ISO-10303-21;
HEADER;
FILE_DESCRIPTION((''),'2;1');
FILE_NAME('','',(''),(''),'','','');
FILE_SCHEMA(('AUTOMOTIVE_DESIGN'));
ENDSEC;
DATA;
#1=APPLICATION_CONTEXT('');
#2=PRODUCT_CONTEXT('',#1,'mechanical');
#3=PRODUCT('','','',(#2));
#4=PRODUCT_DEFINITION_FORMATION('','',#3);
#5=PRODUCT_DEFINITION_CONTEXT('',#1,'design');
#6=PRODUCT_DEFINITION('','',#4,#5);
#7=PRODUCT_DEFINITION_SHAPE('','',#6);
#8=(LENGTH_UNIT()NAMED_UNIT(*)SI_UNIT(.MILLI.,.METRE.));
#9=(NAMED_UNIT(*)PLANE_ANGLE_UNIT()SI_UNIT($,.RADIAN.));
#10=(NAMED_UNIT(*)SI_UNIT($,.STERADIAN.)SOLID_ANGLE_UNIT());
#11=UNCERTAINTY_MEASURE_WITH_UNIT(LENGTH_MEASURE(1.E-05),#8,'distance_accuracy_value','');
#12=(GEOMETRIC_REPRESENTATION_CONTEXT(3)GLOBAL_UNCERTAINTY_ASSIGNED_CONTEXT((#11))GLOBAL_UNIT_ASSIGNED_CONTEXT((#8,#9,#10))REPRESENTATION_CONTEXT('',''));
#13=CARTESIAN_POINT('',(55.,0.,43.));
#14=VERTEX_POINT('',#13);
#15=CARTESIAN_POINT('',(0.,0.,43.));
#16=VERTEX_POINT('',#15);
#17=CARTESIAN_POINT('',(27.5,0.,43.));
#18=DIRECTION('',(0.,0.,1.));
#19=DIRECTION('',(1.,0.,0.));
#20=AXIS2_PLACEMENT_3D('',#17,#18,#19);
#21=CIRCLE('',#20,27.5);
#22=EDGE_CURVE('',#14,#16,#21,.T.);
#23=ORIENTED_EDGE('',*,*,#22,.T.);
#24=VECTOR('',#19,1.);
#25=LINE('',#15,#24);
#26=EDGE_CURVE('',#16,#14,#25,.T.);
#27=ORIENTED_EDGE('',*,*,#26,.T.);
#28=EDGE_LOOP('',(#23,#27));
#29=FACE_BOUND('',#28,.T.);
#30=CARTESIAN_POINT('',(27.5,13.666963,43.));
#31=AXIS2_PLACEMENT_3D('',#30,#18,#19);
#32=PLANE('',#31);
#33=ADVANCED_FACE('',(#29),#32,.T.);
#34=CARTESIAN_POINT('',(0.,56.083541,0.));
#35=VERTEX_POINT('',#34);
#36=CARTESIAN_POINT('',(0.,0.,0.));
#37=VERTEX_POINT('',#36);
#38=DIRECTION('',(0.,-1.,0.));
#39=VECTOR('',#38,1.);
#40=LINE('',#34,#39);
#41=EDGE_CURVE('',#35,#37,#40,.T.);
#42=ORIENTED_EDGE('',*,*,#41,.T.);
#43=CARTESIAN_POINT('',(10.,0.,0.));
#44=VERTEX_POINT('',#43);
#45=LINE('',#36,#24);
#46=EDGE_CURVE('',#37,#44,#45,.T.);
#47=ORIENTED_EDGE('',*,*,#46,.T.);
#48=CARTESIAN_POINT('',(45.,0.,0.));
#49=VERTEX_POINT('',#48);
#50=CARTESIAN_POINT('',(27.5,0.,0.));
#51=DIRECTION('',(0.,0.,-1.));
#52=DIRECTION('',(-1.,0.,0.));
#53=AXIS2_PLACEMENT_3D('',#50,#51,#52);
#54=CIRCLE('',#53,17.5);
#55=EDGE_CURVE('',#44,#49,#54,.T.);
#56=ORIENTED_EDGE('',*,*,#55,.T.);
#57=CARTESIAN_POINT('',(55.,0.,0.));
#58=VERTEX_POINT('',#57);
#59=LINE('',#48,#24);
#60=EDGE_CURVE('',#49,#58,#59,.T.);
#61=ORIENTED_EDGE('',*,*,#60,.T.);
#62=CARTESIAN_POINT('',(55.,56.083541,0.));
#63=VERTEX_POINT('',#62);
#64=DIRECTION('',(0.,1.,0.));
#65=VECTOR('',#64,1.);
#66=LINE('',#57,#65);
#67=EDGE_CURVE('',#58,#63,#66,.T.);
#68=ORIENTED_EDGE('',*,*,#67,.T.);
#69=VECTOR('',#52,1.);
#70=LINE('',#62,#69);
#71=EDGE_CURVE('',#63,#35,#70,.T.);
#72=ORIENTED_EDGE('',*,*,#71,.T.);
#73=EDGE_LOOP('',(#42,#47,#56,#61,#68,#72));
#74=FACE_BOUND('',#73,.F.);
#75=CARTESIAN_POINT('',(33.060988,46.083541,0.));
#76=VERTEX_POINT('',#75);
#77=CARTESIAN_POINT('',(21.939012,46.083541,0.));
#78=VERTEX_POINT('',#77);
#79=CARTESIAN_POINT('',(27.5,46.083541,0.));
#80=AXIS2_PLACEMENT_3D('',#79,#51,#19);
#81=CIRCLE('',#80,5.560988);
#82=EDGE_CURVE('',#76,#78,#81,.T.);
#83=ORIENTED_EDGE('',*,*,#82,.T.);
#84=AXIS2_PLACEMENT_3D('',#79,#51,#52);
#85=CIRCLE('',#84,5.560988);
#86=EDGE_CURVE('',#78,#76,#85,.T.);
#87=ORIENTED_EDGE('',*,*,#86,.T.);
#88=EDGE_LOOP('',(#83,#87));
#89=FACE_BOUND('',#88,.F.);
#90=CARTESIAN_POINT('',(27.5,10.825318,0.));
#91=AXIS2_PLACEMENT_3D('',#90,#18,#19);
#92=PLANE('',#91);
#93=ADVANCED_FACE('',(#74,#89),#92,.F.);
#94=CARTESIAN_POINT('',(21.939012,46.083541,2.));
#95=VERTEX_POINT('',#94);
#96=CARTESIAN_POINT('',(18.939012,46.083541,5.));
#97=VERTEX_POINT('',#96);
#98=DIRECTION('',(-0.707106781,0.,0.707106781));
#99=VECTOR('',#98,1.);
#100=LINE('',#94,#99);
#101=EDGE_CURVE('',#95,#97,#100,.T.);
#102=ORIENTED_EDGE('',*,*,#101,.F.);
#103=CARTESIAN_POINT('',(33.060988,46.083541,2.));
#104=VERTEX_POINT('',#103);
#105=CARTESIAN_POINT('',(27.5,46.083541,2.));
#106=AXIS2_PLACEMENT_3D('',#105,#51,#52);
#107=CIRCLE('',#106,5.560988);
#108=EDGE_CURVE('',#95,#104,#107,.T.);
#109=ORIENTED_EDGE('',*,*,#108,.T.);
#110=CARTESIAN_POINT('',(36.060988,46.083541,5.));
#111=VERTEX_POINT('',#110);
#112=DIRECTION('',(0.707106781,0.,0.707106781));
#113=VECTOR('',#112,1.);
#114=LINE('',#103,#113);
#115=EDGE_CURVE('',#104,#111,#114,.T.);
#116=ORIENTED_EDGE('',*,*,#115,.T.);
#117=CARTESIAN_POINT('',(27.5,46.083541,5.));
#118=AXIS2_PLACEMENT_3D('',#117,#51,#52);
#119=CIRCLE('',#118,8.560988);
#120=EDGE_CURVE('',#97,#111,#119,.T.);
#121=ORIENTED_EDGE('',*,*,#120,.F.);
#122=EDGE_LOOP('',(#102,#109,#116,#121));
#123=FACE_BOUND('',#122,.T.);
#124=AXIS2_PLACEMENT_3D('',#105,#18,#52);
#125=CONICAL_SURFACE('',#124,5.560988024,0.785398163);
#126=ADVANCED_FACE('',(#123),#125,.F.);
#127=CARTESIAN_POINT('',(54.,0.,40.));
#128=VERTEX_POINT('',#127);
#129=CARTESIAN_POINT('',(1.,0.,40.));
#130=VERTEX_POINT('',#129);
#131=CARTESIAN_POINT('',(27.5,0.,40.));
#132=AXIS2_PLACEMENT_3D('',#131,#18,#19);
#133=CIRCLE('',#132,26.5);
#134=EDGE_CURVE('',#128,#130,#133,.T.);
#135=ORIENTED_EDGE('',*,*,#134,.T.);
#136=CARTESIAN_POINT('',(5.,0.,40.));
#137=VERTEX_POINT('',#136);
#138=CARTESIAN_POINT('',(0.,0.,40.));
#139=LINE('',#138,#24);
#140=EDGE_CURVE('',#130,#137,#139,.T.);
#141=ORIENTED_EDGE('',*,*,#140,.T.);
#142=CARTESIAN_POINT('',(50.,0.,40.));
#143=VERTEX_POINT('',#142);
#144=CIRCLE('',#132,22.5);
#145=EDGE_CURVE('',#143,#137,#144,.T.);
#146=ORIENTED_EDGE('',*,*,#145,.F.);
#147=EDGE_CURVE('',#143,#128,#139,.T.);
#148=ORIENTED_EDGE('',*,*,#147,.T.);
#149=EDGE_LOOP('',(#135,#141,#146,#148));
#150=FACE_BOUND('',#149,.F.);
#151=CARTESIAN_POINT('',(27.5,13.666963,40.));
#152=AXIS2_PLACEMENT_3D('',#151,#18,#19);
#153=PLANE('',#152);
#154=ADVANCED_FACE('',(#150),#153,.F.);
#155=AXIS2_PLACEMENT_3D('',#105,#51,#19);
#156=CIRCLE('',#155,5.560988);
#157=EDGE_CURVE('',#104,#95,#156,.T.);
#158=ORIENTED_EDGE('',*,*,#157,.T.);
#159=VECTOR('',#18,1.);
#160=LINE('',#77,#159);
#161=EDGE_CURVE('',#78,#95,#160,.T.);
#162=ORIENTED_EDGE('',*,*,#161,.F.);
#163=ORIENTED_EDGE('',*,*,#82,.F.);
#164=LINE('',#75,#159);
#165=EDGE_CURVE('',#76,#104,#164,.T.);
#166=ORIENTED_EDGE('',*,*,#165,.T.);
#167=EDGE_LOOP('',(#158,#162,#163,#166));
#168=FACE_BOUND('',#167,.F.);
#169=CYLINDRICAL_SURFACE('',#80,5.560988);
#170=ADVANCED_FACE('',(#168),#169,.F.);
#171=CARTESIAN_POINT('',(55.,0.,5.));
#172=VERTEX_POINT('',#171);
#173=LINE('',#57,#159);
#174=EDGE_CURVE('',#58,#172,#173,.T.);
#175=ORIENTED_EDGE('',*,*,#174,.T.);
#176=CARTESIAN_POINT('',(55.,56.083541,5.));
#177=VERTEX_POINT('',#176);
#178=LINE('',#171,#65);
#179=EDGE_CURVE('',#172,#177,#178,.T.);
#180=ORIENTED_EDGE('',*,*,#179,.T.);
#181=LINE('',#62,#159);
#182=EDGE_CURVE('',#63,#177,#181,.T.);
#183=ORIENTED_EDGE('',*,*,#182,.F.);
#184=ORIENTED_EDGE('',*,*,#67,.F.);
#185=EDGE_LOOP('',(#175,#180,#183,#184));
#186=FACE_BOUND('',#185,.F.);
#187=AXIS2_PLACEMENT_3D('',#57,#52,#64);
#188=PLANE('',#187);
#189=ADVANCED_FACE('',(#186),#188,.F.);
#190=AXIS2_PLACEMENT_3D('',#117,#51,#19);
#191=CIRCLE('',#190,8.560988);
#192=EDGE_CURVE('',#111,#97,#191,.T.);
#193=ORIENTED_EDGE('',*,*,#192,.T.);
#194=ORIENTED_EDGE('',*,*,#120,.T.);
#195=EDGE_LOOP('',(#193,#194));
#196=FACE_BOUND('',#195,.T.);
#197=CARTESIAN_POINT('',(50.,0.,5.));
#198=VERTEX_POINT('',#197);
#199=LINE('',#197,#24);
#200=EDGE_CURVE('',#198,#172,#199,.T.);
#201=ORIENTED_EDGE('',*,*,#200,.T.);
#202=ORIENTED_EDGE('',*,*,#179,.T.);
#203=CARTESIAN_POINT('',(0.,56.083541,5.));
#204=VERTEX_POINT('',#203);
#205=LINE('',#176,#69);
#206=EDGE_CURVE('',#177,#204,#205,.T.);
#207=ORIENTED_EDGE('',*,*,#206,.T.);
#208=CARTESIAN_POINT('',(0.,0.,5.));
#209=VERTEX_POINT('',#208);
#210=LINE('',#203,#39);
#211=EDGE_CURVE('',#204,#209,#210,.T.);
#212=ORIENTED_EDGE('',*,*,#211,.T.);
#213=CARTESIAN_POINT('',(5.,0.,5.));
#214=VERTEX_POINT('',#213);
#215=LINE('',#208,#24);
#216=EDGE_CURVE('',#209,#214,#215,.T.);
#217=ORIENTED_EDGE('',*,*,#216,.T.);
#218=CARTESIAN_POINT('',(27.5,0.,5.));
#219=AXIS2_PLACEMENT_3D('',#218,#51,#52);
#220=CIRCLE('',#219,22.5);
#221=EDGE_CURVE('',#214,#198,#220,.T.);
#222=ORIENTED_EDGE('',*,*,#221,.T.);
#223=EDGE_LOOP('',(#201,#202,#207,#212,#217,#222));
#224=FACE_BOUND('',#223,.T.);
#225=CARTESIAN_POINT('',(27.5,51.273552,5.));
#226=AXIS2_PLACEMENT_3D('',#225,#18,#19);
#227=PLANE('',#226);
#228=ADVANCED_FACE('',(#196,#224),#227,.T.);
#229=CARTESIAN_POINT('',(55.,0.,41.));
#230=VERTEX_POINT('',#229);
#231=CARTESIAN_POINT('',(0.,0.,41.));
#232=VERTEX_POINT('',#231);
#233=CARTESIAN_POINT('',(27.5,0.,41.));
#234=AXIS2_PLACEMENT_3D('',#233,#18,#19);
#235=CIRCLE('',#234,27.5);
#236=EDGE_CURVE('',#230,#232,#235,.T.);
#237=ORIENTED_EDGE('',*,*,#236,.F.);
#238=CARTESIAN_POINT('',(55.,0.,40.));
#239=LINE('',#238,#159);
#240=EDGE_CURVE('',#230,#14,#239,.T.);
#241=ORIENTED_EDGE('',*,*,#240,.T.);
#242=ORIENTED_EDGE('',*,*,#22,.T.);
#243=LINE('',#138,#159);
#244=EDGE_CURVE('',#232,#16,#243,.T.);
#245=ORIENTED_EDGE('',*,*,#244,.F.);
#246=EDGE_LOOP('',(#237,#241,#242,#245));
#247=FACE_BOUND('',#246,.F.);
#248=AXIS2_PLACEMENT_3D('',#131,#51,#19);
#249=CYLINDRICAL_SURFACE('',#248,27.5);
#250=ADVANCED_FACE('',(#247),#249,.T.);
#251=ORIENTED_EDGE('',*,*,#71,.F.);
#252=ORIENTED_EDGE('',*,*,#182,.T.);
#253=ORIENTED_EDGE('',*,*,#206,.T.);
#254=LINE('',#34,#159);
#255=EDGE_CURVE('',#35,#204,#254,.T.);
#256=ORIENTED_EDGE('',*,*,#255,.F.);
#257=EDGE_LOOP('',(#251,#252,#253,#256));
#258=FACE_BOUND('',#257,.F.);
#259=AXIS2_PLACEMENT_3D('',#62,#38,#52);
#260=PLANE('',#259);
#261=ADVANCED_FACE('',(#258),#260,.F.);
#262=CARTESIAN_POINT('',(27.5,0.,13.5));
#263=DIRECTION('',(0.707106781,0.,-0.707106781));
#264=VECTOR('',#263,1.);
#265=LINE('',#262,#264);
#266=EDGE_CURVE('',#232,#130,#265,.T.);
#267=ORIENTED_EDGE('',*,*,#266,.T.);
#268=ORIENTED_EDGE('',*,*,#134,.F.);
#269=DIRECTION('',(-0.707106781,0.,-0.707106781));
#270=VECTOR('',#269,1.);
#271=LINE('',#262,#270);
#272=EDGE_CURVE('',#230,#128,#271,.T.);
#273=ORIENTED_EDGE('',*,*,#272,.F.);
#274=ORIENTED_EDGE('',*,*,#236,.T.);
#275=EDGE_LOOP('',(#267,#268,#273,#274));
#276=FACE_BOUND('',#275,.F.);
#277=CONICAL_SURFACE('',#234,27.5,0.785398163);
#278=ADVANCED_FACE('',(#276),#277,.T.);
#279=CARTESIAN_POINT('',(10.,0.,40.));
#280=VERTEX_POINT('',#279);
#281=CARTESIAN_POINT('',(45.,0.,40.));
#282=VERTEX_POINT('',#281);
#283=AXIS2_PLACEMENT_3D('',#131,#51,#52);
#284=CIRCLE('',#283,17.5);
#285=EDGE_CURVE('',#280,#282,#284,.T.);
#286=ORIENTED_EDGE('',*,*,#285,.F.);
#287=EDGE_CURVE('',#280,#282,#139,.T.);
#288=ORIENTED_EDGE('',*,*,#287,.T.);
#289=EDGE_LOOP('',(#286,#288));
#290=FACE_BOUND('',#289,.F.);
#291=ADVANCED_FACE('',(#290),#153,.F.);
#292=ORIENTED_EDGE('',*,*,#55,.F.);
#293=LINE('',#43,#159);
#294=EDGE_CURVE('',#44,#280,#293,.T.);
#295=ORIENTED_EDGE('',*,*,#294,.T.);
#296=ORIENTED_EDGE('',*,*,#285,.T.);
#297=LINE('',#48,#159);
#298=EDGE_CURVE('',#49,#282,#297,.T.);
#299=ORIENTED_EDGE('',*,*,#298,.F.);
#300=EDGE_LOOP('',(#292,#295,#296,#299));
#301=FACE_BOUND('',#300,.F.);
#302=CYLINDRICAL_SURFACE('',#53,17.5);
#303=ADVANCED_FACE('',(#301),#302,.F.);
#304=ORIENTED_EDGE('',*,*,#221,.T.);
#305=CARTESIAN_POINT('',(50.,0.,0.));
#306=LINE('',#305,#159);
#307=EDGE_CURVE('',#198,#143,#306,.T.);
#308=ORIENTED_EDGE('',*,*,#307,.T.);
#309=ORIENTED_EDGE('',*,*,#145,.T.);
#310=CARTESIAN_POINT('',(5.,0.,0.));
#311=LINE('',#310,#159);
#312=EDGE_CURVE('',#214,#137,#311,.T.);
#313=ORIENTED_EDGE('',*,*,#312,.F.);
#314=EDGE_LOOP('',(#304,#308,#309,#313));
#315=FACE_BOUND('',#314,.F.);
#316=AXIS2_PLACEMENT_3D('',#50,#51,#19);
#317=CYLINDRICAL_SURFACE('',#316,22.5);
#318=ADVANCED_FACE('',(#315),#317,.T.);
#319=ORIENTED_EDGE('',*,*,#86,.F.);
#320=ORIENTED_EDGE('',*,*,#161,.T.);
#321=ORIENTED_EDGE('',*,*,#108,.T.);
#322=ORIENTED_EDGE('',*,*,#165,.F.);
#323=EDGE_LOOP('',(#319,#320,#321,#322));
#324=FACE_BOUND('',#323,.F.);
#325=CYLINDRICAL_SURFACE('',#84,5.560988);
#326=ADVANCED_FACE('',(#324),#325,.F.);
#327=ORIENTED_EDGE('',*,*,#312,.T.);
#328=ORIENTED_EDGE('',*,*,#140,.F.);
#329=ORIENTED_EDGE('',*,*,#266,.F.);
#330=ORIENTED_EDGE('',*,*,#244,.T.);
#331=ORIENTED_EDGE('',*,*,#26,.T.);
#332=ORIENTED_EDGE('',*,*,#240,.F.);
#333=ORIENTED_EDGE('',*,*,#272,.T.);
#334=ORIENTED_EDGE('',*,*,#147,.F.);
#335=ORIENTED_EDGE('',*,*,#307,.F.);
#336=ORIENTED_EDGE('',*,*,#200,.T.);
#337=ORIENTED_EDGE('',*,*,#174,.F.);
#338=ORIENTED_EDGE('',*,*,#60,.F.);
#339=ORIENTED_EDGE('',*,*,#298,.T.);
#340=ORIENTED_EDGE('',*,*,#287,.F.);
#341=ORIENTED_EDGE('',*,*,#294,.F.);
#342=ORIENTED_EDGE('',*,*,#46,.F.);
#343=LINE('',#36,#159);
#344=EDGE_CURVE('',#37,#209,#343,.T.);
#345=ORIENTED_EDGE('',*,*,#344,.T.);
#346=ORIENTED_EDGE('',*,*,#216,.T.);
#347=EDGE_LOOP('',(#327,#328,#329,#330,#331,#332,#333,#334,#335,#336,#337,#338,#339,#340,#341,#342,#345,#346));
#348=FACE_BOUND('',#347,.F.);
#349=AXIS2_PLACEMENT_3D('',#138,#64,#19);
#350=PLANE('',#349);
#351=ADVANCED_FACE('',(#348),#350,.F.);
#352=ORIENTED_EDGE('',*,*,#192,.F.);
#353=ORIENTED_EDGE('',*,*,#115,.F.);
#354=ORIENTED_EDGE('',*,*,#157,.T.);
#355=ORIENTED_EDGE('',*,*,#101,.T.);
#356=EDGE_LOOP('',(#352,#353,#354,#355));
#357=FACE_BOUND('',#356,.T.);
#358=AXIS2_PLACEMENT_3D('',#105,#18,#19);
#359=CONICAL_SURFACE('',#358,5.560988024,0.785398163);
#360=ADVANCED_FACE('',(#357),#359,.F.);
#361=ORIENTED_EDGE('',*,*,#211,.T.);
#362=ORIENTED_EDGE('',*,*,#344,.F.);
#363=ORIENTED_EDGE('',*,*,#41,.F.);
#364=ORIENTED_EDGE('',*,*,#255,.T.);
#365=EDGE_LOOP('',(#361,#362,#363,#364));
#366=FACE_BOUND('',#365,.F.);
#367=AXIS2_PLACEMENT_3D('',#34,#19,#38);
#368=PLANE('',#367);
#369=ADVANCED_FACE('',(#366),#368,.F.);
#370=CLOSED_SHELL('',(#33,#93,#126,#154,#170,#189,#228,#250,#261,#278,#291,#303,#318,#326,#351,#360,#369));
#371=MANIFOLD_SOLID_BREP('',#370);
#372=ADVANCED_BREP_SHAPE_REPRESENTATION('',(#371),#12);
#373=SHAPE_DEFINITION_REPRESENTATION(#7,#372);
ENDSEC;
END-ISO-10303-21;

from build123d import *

# Parameters (mm, degrees)
F1_DEPTH = 5
F2_DEPTH = 40
F3_SIZE  = 3
F5_DEPTH = 3
F6_SIZE  = 1


with BuildPart() as f1:
    # F0 (on Top) → F1 (new body)
    with BuildSketch(Plane.XY):
        with BuildLine():
            Line((55, 56.0835413635), (0, 56.0835413635))
            Line((0, 56.0835413635), (0, 46.0835413635))
            Line((0, 46.0835413635), (21.9390119762, 46.0835413635))
            ThreePointArc((21.9390119762, 46.0835413635), (27.5, 51.6445293873), (33.0609880238, 46.0835413635))
            Line((33.0609880238, 46.0835413635), (55, 46.0835413635))
            Line((55, 46.0835413635), (55, 56.0835413635))
        make_face()
        with BuildLine():
            Line((21.9390119762, 46.0835413635), (0, 46.0835413635))
            Line((0, 46.0835413635), (0, 0))
            Line((0, 0), (5, 0))
            ThreePointArc((5, 0), (27.5, 22.5), (50, 0))
            Line((50, 0), (55, 0))
            Line((55, 0), (55, 46.0835413635))
            Line((55, 46.0835413635), (33.0609880238, 46.0835413635))
            ThreePointArc((33.0609880238, 46.0835413635), (27.5, 40.5225533396), (21.9390119762, 46.0835413635))
        make_face()
    extrude(amount=F1_DEPTH)

    # F0 (on Top) → F2 (join)
    with BuildSketch(Plane.XY):
        with BuildLine():
            ThreePointArc((50, 0), (27.5, 22.5), (5, 0))
            Line((5, 0), (10, 0))
            ThreePointArc((10, 0), (27.5, 17.5), (45, 0))
            Line((45, 0), (50, 0))
        make_face()
    extrude(amount=F2_DEPTH)

    # F3
    f3_edges = [f1.edges().sort_by_distance(p)[0] for p in [
        (21.939012, 46.083541, 5),
    ]]
    chamfer(f3_edges, length=F3_SIZE)

    # F4 (on face) → F5 (join)
    with BuildSketch(Plane.XY.offset(40)):
        with BuildLine():
            Line((50, 0), (55, 0))
            ThreePointArc((55, 0), (27.5, 27.5), (0, 0))
            Line((0, 0), (5, 0))
            ThreePointArc((5, 0), (27.5, 22.5), (50, 0))
        make_face()
        with BuildLine():
            Line((45, 0), (50, 0))
            ThreePointArc((50, 0), (27.5, 22.5), (5, 0))
            Line((5, 0), (10, 0))
            ThreePointArc((10, 0), (27.5, 17.5), (45, 0))
        make_face()
        with BuildLine():
            Line((10, 0), (45, 0))
            ThreePointArc((45, 0), (27.5, 17.5), (10, 0))
        make_face()
    extrude(amount=F5_DEPTH)

    # F6
    f6_edges = [f1.edges().sort_by_distance(p)[0] for p in [
        (27.5, 27.5, 40),
    ]]
    chamfer(f6_edges, length=F6_SIZE)


solid = f1.part
